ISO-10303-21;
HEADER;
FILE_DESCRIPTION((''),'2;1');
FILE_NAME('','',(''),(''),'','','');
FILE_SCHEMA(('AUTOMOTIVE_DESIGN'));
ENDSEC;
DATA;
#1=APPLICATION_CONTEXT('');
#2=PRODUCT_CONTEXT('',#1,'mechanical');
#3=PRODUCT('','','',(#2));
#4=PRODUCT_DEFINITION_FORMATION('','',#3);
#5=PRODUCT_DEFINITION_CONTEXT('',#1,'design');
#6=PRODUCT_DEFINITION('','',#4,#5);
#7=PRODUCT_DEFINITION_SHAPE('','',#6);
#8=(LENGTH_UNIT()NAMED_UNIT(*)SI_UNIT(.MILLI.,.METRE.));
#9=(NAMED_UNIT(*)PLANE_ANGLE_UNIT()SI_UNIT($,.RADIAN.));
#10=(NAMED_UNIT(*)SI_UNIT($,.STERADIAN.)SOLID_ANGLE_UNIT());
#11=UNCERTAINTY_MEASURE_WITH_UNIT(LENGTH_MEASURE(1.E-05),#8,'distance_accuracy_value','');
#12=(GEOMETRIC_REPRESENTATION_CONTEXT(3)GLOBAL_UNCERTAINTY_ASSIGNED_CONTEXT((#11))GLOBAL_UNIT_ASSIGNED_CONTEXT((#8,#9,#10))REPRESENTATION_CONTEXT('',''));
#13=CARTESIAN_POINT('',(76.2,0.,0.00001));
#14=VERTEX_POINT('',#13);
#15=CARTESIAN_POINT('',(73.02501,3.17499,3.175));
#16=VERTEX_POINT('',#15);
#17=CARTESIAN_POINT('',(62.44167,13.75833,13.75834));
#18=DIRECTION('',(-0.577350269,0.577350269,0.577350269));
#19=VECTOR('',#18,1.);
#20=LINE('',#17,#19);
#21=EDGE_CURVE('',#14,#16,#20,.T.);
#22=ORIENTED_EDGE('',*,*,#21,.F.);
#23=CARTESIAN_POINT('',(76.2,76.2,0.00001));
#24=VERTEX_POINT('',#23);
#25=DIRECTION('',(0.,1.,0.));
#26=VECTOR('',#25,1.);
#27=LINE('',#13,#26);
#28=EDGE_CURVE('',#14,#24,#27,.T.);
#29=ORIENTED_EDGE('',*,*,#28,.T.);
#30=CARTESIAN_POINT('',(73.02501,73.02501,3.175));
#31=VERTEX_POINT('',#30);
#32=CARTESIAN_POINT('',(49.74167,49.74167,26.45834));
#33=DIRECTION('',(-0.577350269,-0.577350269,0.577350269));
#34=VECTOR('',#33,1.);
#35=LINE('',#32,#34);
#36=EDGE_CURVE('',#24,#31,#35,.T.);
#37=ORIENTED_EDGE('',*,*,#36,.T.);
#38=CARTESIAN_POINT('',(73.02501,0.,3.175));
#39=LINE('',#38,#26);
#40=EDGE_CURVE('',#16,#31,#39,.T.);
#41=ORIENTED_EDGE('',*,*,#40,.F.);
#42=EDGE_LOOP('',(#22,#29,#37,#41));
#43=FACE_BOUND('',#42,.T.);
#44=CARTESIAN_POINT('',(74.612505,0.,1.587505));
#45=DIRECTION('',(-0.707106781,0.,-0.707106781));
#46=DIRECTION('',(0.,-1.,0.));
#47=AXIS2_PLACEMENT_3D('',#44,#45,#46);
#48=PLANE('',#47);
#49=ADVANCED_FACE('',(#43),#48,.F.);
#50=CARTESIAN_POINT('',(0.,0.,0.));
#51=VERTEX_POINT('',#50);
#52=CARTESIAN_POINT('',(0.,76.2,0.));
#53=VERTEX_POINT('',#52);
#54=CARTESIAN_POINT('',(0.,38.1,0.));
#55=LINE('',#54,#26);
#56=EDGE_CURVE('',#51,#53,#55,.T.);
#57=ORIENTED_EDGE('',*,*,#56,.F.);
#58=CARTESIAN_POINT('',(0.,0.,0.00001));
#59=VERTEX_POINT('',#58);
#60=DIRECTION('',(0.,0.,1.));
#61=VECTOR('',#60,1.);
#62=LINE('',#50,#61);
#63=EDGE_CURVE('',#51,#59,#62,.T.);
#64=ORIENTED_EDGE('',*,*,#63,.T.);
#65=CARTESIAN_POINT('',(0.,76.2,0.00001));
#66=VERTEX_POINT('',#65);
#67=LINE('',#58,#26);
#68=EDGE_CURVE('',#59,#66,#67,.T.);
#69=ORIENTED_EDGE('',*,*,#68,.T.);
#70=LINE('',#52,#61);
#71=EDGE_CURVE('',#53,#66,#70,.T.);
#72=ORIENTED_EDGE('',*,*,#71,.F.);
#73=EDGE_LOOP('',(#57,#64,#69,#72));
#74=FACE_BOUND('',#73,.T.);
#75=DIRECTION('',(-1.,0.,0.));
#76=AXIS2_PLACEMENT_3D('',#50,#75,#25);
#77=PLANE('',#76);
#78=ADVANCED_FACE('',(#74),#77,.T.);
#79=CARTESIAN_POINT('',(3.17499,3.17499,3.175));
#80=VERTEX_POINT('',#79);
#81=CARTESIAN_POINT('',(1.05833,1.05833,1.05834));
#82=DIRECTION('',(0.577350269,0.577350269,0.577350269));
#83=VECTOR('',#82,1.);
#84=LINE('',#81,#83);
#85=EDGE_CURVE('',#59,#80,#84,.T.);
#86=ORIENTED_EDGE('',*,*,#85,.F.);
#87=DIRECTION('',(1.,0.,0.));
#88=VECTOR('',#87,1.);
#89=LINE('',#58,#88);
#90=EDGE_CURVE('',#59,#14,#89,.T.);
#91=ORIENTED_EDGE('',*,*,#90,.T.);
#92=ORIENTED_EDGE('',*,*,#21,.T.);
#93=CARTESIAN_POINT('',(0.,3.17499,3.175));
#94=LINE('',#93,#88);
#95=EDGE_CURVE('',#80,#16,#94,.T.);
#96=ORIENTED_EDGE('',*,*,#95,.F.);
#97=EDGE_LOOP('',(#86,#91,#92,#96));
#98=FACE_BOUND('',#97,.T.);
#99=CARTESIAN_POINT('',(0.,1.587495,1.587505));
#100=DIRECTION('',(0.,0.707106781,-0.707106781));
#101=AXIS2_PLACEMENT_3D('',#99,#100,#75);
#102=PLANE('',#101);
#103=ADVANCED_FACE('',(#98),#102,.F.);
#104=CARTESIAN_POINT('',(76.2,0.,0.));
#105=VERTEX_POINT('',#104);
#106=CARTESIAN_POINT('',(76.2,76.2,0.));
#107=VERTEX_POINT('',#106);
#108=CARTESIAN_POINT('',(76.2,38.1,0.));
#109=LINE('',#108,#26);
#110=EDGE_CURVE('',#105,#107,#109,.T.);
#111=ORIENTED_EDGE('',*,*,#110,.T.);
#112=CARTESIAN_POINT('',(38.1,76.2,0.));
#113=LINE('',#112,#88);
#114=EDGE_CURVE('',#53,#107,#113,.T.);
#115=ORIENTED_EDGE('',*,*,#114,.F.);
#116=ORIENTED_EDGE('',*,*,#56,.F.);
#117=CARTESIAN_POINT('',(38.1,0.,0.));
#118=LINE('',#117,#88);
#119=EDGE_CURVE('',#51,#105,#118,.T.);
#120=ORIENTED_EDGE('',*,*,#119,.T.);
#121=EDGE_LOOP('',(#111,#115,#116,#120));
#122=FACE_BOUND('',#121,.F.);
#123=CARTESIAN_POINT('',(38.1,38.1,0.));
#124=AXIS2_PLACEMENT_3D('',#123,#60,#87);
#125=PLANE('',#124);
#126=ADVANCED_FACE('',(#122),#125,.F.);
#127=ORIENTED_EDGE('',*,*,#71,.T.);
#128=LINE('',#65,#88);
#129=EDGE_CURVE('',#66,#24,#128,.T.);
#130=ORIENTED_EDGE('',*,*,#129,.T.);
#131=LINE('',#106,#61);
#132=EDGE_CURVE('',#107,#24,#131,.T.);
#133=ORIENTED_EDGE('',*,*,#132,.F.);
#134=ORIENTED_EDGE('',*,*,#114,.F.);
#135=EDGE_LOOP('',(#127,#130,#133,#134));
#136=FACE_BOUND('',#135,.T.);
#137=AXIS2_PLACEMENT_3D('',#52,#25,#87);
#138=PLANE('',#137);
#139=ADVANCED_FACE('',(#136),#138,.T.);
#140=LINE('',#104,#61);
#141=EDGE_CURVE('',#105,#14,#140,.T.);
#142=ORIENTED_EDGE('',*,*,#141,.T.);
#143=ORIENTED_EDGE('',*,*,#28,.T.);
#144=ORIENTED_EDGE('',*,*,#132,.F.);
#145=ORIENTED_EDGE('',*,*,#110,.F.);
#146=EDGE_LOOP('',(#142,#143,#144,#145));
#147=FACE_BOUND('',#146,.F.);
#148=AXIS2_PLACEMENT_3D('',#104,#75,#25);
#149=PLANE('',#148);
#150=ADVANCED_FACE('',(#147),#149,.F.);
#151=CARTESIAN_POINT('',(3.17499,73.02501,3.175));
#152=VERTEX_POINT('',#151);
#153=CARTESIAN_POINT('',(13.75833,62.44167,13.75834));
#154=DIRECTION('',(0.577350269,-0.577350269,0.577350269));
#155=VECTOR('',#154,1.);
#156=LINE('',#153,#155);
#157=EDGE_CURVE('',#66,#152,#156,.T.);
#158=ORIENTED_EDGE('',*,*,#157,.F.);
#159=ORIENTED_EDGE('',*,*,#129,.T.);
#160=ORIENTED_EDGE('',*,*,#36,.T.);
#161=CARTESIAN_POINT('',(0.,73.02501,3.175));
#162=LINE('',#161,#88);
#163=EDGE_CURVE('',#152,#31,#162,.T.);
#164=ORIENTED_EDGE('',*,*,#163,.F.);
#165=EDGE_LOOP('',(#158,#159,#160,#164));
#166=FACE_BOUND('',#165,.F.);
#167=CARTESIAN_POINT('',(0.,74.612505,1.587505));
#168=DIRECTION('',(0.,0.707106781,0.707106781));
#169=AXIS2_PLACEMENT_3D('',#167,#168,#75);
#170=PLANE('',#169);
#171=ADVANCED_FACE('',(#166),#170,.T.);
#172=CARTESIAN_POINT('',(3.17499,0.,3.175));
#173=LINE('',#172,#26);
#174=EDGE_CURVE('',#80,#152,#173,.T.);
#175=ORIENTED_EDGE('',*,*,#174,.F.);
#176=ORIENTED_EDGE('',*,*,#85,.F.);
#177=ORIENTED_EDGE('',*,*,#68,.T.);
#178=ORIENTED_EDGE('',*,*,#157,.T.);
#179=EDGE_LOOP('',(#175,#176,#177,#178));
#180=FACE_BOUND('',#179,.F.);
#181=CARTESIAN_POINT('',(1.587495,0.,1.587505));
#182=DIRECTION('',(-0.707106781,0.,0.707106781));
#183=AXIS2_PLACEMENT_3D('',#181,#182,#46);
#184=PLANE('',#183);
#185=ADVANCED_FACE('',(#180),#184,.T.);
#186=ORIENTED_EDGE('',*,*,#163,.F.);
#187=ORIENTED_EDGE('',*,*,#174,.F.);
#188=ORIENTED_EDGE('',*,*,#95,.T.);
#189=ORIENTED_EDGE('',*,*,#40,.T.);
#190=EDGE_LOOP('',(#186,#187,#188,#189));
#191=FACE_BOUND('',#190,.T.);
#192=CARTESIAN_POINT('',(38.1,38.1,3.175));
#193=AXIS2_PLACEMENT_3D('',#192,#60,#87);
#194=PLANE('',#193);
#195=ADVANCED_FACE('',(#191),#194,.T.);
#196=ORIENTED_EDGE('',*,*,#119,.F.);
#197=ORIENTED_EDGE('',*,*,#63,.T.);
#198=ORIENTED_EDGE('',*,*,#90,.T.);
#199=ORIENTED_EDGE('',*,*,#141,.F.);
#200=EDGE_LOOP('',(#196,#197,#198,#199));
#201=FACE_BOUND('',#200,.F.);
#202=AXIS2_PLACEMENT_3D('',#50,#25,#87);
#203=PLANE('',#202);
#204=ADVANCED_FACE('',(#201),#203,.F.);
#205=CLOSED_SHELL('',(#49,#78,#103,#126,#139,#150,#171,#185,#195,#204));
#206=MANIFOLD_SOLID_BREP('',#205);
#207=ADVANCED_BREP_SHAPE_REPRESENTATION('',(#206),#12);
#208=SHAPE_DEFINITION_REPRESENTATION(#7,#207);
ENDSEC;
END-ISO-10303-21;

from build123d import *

# Parameters (mm, degrees)
F0_W     = 76.2
F0_H     = 76.2
F1_DEPTH = 3.175
F2_SIZE  = 3.17499


# Not quite as in the source:
# - a fillet or chamfer is up to 0.001 mm smaller than in the source, because OpenCascade refuses the exact size


with BuildPart() as f1:
    # F0 (on Top) → F1 (new body)
    with BuildSketch(Plane.XY):
        with Locations((38.1, 38.1)):
            Rectangle(F0_W, F0_H)
    extrude(amount=F1_DEPTH)

    # F2 (size 3.175 in the source; OpenCascade refuses exactly that, so slightly less here)
    f2_edges = [f1.edges().sort_by_distance(p)[0] for p in [
        (38.1, 76.2, 3.175),
        (76.2, 38.1, 3.175),
        (38.1, 0, 3.175),
        (0, 38.1, 3.175),
    ]]
    chamfer(f2_edges, length=F2_SIZE)


solid = f1.part
